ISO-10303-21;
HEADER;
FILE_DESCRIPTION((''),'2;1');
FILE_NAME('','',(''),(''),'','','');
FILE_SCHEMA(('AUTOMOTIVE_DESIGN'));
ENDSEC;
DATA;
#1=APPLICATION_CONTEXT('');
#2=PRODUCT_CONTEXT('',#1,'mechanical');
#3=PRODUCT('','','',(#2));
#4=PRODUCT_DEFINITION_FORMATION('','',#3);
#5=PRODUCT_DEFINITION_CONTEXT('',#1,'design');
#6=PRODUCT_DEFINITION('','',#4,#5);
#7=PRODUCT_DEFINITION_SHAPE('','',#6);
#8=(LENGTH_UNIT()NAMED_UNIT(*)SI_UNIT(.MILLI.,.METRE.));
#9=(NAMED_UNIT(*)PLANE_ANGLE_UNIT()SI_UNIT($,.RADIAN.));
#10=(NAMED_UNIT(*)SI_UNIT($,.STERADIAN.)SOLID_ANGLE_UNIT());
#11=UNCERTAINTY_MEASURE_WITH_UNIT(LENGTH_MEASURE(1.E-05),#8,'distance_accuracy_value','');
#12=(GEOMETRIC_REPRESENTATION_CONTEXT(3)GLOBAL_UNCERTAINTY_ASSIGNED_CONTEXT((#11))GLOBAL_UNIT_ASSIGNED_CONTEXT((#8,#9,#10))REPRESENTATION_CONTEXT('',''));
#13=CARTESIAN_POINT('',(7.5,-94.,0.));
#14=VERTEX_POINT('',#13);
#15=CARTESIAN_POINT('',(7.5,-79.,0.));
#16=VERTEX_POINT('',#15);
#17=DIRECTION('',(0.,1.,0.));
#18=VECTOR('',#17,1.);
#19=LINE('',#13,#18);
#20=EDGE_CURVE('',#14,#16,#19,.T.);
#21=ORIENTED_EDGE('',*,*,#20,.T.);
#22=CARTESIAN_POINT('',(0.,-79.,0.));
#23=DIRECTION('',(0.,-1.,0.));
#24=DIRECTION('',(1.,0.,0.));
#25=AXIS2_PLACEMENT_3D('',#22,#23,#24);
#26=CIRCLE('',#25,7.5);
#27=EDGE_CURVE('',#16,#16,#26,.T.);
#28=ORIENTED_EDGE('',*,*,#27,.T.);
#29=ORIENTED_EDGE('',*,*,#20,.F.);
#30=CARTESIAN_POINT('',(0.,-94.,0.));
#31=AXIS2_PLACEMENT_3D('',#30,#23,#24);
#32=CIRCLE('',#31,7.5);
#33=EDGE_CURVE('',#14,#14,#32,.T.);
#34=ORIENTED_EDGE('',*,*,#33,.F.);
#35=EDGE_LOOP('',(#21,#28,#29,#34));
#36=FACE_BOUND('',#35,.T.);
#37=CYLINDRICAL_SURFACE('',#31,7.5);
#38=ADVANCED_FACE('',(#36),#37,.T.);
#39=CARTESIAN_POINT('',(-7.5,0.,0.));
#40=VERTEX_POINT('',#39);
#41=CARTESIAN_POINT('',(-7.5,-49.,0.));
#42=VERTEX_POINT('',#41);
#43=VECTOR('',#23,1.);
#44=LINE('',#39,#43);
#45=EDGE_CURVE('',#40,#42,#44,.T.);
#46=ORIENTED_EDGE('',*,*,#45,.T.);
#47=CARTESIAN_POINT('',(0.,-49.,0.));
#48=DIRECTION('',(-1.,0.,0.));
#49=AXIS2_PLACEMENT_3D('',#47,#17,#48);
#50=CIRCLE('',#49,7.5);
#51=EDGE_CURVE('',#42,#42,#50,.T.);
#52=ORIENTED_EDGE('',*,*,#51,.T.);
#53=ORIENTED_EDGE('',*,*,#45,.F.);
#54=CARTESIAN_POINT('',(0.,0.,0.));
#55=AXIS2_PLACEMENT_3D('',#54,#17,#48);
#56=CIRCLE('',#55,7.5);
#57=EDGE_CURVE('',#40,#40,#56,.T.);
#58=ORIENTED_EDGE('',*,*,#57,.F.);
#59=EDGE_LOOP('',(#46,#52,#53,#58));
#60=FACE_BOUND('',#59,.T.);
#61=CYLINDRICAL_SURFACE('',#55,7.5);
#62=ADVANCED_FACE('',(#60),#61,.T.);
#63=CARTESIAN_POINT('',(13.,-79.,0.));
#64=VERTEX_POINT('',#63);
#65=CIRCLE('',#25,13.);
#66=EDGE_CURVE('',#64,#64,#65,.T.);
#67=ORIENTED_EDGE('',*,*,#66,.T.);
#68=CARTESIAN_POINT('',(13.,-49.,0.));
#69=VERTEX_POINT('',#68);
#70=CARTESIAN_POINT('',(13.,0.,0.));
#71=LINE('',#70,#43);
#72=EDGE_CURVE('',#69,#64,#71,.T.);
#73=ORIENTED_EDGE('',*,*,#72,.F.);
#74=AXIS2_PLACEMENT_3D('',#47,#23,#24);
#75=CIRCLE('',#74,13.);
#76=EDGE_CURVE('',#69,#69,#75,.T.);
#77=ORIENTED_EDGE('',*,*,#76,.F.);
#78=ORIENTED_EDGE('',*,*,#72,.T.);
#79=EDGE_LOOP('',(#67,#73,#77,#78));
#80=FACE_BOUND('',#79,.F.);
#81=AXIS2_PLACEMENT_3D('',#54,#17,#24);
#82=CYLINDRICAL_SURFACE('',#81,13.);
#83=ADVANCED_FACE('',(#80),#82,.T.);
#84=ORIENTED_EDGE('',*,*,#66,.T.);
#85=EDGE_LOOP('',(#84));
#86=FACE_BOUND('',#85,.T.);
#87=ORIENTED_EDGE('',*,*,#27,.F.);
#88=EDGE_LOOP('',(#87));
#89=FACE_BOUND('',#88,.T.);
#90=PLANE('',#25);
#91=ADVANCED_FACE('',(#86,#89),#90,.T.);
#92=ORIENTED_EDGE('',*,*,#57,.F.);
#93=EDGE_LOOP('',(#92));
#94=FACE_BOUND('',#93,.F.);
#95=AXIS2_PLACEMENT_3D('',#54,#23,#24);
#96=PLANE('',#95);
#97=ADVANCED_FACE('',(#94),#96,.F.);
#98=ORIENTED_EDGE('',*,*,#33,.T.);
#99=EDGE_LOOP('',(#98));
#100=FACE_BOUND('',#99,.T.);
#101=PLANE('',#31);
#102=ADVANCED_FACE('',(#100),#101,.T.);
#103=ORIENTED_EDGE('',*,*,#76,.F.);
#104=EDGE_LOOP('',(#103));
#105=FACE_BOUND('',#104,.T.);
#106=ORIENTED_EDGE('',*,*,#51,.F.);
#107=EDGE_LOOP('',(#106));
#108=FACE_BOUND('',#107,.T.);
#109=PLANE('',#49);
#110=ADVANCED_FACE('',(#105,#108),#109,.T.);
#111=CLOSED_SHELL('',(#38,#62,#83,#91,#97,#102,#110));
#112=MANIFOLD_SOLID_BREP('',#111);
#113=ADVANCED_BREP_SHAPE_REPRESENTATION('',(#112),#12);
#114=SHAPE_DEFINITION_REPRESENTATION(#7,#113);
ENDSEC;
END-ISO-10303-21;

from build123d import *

# Parameters (mm, degrees)
F0_R     = 13
F1_DEPTH = 94
F2_R     = 13
F2_R_2   = 7.5
F3_DEPTH = 15
F4_R     = 13
F4_R_2   = 7.5
F5_DEPTH = 49


with BuildPart() as f1:
    # F0 (on Front) → F1 (new body)
    with BuildSketch(Plane.XZ):
        Circle(F0_R)
    extrude(amount=F1_DEPTH)

    # F2 (on face) → F3 (cut)
    with BuildSketch(Plane.XZ.offset(94)):
        Circle(F2_R)
        Circle(F2_R_2, mode=Mode.SUBTRACT)
    extrude(amount=-F3_DEPTH, mode=Mode.SUBTRACT)

    # F4 (on face) → F5 (cut)
    with BuildSketch(Plane(origin=(0, 0, 0), x_dir=(-1, 0, 0), z_dir=(0, 1, 0))):
        Circle(F4_R)
        Circle(F4_R_2, mode=Mode.SUBTRACT)
    extrude(amount=-F5_DEPTH, mode=Mode.SUBTRACT)


solid = f1.part
